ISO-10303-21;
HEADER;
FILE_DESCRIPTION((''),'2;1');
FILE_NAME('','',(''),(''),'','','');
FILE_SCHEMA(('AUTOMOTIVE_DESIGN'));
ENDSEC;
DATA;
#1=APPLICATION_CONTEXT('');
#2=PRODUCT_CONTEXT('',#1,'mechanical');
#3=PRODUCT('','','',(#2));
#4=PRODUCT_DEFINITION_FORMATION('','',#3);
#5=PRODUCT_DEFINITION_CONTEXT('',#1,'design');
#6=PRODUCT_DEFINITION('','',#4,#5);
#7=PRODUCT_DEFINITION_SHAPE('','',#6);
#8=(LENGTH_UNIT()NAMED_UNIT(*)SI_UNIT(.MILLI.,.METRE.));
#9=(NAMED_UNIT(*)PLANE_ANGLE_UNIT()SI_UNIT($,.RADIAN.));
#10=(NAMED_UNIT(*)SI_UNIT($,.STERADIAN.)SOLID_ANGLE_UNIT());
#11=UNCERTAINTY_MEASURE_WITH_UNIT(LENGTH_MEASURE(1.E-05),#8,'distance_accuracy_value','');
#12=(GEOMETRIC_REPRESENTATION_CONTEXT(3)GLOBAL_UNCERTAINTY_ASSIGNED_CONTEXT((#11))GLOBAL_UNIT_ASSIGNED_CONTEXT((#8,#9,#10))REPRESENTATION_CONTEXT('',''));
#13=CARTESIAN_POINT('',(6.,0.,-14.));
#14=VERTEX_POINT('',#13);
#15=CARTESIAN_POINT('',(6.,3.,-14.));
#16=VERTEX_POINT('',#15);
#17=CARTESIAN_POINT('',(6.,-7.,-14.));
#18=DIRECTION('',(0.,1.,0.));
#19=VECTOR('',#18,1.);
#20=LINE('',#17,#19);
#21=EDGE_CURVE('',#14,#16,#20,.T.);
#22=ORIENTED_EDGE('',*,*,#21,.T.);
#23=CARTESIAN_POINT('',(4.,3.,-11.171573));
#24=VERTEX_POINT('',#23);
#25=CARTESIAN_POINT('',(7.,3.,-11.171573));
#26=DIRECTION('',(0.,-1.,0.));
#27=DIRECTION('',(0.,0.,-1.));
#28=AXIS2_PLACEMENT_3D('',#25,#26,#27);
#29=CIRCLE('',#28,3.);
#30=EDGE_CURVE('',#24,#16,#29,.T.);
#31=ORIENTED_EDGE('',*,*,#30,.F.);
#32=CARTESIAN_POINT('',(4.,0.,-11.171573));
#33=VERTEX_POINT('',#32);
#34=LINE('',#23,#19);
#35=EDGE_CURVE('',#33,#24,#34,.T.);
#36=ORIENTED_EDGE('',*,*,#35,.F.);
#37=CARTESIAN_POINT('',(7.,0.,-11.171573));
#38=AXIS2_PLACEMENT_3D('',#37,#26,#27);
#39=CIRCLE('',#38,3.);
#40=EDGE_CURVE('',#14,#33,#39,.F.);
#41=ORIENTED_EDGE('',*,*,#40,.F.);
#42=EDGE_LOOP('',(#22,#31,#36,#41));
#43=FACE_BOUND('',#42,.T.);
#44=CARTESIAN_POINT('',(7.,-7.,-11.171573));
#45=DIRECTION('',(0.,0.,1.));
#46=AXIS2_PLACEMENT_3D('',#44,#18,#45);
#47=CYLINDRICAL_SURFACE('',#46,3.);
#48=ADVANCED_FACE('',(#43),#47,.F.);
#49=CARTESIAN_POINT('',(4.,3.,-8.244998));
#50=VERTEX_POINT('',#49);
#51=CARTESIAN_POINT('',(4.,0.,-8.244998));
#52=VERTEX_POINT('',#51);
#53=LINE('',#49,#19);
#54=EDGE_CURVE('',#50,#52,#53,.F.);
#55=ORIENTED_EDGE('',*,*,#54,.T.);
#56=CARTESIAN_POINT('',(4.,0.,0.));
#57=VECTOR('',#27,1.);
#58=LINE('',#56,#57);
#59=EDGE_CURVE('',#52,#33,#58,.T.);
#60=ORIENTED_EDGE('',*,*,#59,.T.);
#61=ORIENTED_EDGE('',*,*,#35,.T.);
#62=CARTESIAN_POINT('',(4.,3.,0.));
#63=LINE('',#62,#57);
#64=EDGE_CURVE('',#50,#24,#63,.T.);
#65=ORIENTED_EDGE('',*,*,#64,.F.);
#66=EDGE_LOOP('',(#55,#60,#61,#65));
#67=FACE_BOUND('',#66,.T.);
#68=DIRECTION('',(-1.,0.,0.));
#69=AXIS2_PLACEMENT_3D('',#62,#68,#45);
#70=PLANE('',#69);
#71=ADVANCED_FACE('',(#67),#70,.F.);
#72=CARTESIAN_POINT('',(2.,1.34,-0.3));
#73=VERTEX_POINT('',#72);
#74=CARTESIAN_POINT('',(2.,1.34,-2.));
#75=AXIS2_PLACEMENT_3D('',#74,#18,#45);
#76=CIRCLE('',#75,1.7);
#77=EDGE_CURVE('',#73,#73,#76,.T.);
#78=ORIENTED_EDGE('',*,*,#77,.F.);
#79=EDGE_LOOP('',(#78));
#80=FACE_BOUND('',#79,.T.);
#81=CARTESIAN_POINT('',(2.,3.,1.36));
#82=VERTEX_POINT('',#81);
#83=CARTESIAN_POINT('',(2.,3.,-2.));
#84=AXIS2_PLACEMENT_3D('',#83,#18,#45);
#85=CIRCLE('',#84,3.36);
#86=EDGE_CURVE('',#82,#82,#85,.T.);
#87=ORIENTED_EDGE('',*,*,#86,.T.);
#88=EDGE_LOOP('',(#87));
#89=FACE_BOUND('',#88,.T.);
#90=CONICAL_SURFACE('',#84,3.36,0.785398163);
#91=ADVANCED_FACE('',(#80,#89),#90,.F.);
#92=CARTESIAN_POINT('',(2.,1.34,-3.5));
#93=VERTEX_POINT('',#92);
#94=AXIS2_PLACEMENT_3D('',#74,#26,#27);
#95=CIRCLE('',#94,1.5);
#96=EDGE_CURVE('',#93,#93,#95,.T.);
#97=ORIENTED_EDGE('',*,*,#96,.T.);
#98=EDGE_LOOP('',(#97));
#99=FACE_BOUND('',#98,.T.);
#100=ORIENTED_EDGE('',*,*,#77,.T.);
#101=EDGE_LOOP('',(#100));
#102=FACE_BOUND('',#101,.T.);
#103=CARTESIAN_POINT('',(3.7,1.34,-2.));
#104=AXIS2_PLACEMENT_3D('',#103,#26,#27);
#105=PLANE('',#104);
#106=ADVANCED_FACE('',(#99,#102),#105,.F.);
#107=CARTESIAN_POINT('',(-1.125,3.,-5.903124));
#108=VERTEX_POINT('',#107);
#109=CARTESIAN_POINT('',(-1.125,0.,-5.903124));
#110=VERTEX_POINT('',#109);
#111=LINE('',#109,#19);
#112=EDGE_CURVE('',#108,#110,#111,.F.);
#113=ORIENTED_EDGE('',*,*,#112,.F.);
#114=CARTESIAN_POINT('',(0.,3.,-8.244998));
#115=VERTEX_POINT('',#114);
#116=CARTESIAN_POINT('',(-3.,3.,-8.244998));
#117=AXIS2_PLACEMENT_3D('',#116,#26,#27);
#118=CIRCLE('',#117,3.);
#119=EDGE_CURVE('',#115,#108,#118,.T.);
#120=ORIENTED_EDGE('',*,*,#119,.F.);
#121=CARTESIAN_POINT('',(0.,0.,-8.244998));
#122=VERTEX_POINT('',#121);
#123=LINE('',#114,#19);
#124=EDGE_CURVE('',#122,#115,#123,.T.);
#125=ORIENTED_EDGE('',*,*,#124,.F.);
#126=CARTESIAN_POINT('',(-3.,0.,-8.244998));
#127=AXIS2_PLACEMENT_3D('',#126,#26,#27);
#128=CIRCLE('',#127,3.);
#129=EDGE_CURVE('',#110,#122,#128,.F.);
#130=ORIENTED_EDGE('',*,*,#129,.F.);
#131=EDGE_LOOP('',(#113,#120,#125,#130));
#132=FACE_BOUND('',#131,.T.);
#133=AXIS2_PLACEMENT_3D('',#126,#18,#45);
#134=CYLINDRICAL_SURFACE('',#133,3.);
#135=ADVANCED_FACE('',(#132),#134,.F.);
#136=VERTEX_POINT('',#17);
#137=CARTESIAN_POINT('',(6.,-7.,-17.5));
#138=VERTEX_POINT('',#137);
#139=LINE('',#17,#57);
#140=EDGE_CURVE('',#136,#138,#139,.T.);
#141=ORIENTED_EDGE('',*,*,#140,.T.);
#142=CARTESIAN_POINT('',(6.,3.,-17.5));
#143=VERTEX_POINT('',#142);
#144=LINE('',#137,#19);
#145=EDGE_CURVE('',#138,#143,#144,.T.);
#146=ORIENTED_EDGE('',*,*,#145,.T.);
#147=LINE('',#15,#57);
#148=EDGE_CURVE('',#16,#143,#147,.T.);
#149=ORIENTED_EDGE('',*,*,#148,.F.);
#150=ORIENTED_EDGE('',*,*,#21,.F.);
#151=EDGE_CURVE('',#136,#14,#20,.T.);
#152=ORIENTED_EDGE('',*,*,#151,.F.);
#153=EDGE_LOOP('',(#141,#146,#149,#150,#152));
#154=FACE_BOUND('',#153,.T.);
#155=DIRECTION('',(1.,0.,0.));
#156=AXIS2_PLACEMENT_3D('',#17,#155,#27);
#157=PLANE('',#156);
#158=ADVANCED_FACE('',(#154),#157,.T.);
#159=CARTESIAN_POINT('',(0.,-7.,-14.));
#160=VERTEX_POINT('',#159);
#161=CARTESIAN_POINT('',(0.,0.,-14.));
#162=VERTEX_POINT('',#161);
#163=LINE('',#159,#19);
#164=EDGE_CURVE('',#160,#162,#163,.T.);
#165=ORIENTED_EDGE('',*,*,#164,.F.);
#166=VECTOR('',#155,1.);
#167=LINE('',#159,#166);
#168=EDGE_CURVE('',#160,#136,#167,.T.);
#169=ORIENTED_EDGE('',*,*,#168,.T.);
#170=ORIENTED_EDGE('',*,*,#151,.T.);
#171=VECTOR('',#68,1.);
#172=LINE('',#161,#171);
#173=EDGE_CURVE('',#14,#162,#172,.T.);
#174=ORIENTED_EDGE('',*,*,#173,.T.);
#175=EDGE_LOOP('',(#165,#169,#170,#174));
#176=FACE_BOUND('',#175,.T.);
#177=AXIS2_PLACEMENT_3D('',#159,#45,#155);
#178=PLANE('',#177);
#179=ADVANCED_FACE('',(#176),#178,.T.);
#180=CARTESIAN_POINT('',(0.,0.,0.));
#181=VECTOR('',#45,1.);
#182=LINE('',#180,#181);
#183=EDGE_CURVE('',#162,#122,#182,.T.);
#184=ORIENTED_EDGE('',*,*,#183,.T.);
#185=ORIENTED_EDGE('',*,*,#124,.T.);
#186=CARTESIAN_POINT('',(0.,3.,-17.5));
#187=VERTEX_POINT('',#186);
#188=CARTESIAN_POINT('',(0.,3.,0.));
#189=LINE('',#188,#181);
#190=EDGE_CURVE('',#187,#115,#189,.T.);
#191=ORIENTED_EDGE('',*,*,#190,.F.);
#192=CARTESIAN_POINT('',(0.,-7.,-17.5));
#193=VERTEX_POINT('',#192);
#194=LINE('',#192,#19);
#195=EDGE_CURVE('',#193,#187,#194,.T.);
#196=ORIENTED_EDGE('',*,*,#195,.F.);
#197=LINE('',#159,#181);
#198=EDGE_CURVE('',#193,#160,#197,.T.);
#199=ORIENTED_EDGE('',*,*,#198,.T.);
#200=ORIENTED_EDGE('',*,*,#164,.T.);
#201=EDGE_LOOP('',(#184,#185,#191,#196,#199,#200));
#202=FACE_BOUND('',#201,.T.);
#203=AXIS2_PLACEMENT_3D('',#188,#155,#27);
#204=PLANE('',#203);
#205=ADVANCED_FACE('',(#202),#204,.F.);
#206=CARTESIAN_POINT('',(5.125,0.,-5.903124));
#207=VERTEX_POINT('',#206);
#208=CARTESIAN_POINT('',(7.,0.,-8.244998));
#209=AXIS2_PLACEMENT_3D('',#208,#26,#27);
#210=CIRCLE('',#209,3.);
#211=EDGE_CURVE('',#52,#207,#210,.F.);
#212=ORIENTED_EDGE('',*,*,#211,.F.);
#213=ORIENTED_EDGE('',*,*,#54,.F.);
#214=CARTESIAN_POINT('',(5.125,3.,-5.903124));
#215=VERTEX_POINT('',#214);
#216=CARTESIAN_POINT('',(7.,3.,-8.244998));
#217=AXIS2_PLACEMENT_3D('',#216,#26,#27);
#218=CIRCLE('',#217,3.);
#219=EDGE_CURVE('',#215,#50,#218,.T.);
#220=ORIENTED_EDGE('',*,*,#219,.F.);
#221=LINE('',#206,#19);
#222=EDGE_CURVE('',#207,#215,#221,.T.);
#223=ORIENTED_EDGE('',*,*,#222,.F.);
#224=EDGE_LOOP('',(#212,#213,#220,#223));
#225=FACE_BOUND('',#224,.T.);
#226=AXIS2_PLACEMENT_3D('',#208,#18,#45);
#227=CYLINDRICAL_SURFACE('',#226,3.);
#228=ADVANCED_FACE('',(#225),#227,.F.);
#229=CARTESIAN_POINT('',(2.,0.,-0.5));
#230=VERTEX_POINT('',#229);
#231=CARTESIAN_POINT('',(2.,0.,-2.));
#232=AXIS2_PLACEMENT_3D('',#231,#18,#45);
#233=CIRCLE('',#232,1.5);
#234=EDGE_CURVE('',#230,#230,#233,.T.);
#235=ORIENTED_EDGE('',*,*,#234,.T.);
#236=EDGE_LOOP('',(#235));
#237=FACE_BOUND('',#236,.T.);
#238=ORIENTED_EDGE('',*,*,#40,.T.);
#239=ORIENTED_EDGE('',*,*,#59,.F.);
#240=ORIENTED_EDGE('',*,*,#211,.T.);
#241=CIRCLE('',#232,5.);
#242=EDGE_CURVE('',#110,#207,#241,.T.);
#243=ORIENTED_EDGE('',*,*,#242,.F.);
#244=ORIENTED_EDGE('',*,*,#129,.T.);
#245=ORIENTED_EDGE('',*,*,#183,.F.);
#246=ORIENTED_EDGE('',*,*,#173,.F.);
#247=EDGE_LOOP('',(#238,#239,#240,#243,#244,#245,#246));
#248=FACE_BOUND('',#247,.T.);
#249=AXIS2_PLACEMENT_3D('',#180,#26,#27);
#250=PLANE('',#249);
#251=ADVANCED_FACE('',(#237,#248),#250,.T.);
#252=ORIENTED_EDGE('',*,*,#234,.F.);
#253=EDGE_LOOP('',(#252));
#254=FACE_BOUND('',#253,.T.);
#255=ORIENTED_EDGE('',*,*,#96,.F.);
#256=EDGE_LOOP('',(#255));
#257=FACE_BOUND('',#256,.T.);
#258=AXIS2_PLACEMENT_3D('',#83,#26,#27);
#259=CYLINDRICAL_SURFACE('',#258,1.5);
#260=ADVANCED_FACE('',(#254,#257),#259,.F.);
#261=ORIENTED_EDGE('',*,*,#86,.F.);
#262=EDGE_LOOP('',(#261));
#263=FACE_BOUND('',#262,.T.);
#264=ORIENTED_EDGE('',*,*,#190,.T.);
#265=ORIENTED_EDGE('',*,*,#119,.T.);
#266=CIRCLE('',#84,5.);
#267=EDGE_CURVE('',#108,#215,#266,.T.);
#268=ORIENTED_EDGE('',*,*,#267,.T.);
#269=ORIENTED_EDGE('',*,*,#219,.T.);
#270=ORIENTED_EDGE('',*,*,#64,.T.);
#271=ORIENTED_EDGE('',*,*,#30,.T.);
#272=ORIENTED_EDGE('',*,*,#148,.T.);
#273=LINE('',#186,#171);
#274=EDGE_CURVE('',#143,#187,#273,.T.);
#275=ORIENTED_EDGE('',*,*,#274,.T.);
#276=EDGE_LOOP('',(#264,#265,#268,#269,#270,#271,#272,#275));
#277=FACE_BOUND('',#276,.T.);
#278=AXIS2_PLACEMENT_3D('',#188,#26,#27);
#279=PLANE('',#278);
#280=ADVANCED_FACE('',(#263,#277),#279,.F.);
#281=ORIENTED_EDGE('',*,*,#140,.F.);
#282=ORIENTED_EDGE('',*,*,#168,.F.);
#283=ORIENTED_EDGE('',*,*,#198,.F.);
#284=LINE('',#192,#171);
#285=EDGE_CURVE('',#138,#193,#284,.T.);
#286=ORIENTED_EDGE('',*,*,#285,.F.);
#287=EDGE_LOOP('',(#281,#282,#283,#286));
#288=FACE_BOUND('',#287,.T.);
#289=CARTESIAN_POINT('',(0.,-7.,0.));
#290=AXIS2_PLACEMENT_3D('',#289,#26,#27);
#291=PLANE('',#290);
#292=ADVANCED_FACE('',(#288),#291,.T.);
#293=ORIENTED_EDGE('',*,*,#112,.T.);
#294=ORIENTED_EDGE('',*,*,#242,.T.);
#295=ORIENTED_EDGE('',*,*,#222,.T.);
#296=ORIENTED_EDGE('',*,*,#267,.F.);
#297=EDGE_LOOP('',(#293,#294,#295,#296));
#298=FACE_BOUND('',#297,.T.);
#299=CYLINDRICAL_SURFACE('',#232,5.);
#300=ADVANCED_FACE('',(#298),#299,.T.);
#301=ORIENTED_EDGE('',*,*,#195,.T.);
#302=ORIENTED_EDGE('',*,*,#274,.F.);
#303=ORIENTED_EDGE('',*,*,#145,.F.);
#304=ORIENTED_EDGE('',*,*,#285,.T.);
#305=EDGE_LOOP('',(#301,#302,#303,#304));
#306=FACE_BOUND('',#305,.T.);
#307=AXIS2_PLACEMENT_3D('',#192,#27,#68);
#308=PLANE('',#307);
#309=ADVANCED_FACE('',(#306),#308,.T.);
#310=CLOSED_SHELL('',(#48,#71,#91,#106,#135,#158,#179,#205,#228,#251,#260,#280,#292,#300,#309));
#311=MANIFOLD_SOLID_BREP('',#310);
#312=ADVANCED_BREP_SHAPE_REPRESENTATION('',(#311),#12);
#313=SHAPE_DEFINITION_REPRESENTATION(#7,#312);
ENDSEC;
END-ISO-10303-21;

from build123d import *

# Parameters (mm, degrees)
CROQUIS1_W              = 4
CROQUIS1_H              = 14
CROQUIS1_R              = 1.5
SALIENTE_EXTRUIR1_DEPTH = 3
CROQUIS2_W              = 6
CROQUIS2_H              = 3.5
SALIENTE_EXTRUIR2_DEPTH = 10
SALIENTE_EXTRUIR3_START = -3
CROQUIS3_R              = 5
CROQUIS3_R_2            = 1.5
SALIENTE_EXTRUIR3_DEPTH = 3
REDONDEO1_R             = 3


# Read off the part's stored shape, not the designer's step: TaladroAvanzado1
with BuildPart() as part:
    # Croquis1 → Saliente-Extruir1 (new body)
    with BuildSketch(Plane(origin=(0, 0, 0), x_dir=(1, 0, 0), z_dir=(0, 1, 0))):
        with Locations((2, 7)):
            Rectangle(CROQUIS1_W, CROQUIS1_H)
        with Locations(Location((2, 2, 0), (0, 0, 270))):
            Circle(CROQUIS1_R, mode=Mode.SUBTRACT)
    extrude(amount=SALIENTE_EXTRUIR1_DEPTH)

    # Croquis2 → Saliente-Extruir2 (add)
    with BuildSketch(Plane(origin=(0, 3, 0), x_dir=(1, 0, 0), z_dir=(0, 1, 0))):
        with Locations((3, 15.75)):
            Rectangle(CROQUIS2_W, CROQUIS2_H)
    extrude(amount=-SALIENTE_EXTRUIR2_DEPTH)

    # Croquis3 → Saliente-Extruir3 (add)
    with BuildSketch(Plane(origin=(0, 3, 0), x_dir=(1, 0, 0), z_dir=(0, 1, 0)).offset(SALIENTE_EXTRUIR3_START)):
        with Locations((2, 2)):
            Circle(CROQUIS3_R)
        with Locations(Location((2, 2, 0), (0, 0, 270))):
            Circle(CROQUIS3_R_2, mode=Mode.SUBTRACT)
    extrude(amount=SALIENTE_EXTRUIR3_DEPTH)

    # TaladroAvanzado1 outline → TaladroAvanzado1 (revolve, cut)
    with BuildSketch(Plane(origin=(2, 0, -2), x_dir=(1, 0, 0), z_dir=(0, 0, 1))):
        Polygon((1.5, 1.34), (1.7, 1.34), (3.36, 3), (1.5, 3), align=None)
    revolve(axis=Axis((2, 0, -2), (0, 1, 0)), mode=Mode.SUBTRACT)

    # Redondeo1
    # the kernel refuses this fillet: 3 mm, written as the material it adds along each edge
    with BuildSketch(Plane(origin=(4, 0, -14), x_dir=(1, 0, 0), z_dir=(0, 1, 0))) as redondeo1_piece_1:
        with BuildLine():
            CenterArc((3, -2.828427125), REDONDEO1_R, 109.471220634, 70.528779366)
            Line((0, -2.828427125), (-0.06, -2.828427125))
            Line((-0.06, -2.828427125), (-0.06, 0))
            Line((-0.06, 0), (0, 0.06))
            ThreePointArc((0, 0.06), (1, 0.06), (1.98, 0.056568542))
            Line((1.98, 0.056568542), (2, 0))
        make_face()
    extrude(amount=3)
    with BuildSketch(Plane(origin=(4, 3, -6.582575695), x_dir=(0, 0, -1), z_dir=(0, -1, 0))) as redondeo1_piece_2:
        with BuildLine():
            CenterArc((1.662422303, 3), REDONDEO1_R, 218.682187453, 51.317812547)
            Line((-0.679451946, 1.125), (-0.726289431, 1.0875))
            ThreePointArc((-0.726289431, 1.0875), (-0.353961086, 0.5539026), (-0.054990908, -0.024))
            Line((-0.054990908, -0.024), (0, -0.06))
            Line((0, -0.06), (1.662422303, -0.06))
            Line((1.662422303, -0.06), (1.662422303, 0))
        make_face()
    extrude(amount=3)
    with BuildSketch(Plane(origin=(0, 3, -6.582575695), x_dir=(0, 0, -1), z_dir=(0, -1, 0))) as redondeo1_piece_3:
        with BuildLine():
            CenterArc((1.662422303, -3), REDONDEO1_R, 90, 51.317812547)
            Line((-0.679451946, -1.125), (-0.726289431, -1.0875))
            ThreePointArc((-0.726289431, -1.0875), (-0.353961086, -0.5539026), (-0.054990908, 0.024))
            Line((-0.054990908, 0.024), (0, 0.06))
            Line((0, 0.06), (1.662422303, 0.06))
            Line((1.662422303, 0.06), (1.662422303, 0))
        make_face()
    extrude(amount=3)


solid = part.part
